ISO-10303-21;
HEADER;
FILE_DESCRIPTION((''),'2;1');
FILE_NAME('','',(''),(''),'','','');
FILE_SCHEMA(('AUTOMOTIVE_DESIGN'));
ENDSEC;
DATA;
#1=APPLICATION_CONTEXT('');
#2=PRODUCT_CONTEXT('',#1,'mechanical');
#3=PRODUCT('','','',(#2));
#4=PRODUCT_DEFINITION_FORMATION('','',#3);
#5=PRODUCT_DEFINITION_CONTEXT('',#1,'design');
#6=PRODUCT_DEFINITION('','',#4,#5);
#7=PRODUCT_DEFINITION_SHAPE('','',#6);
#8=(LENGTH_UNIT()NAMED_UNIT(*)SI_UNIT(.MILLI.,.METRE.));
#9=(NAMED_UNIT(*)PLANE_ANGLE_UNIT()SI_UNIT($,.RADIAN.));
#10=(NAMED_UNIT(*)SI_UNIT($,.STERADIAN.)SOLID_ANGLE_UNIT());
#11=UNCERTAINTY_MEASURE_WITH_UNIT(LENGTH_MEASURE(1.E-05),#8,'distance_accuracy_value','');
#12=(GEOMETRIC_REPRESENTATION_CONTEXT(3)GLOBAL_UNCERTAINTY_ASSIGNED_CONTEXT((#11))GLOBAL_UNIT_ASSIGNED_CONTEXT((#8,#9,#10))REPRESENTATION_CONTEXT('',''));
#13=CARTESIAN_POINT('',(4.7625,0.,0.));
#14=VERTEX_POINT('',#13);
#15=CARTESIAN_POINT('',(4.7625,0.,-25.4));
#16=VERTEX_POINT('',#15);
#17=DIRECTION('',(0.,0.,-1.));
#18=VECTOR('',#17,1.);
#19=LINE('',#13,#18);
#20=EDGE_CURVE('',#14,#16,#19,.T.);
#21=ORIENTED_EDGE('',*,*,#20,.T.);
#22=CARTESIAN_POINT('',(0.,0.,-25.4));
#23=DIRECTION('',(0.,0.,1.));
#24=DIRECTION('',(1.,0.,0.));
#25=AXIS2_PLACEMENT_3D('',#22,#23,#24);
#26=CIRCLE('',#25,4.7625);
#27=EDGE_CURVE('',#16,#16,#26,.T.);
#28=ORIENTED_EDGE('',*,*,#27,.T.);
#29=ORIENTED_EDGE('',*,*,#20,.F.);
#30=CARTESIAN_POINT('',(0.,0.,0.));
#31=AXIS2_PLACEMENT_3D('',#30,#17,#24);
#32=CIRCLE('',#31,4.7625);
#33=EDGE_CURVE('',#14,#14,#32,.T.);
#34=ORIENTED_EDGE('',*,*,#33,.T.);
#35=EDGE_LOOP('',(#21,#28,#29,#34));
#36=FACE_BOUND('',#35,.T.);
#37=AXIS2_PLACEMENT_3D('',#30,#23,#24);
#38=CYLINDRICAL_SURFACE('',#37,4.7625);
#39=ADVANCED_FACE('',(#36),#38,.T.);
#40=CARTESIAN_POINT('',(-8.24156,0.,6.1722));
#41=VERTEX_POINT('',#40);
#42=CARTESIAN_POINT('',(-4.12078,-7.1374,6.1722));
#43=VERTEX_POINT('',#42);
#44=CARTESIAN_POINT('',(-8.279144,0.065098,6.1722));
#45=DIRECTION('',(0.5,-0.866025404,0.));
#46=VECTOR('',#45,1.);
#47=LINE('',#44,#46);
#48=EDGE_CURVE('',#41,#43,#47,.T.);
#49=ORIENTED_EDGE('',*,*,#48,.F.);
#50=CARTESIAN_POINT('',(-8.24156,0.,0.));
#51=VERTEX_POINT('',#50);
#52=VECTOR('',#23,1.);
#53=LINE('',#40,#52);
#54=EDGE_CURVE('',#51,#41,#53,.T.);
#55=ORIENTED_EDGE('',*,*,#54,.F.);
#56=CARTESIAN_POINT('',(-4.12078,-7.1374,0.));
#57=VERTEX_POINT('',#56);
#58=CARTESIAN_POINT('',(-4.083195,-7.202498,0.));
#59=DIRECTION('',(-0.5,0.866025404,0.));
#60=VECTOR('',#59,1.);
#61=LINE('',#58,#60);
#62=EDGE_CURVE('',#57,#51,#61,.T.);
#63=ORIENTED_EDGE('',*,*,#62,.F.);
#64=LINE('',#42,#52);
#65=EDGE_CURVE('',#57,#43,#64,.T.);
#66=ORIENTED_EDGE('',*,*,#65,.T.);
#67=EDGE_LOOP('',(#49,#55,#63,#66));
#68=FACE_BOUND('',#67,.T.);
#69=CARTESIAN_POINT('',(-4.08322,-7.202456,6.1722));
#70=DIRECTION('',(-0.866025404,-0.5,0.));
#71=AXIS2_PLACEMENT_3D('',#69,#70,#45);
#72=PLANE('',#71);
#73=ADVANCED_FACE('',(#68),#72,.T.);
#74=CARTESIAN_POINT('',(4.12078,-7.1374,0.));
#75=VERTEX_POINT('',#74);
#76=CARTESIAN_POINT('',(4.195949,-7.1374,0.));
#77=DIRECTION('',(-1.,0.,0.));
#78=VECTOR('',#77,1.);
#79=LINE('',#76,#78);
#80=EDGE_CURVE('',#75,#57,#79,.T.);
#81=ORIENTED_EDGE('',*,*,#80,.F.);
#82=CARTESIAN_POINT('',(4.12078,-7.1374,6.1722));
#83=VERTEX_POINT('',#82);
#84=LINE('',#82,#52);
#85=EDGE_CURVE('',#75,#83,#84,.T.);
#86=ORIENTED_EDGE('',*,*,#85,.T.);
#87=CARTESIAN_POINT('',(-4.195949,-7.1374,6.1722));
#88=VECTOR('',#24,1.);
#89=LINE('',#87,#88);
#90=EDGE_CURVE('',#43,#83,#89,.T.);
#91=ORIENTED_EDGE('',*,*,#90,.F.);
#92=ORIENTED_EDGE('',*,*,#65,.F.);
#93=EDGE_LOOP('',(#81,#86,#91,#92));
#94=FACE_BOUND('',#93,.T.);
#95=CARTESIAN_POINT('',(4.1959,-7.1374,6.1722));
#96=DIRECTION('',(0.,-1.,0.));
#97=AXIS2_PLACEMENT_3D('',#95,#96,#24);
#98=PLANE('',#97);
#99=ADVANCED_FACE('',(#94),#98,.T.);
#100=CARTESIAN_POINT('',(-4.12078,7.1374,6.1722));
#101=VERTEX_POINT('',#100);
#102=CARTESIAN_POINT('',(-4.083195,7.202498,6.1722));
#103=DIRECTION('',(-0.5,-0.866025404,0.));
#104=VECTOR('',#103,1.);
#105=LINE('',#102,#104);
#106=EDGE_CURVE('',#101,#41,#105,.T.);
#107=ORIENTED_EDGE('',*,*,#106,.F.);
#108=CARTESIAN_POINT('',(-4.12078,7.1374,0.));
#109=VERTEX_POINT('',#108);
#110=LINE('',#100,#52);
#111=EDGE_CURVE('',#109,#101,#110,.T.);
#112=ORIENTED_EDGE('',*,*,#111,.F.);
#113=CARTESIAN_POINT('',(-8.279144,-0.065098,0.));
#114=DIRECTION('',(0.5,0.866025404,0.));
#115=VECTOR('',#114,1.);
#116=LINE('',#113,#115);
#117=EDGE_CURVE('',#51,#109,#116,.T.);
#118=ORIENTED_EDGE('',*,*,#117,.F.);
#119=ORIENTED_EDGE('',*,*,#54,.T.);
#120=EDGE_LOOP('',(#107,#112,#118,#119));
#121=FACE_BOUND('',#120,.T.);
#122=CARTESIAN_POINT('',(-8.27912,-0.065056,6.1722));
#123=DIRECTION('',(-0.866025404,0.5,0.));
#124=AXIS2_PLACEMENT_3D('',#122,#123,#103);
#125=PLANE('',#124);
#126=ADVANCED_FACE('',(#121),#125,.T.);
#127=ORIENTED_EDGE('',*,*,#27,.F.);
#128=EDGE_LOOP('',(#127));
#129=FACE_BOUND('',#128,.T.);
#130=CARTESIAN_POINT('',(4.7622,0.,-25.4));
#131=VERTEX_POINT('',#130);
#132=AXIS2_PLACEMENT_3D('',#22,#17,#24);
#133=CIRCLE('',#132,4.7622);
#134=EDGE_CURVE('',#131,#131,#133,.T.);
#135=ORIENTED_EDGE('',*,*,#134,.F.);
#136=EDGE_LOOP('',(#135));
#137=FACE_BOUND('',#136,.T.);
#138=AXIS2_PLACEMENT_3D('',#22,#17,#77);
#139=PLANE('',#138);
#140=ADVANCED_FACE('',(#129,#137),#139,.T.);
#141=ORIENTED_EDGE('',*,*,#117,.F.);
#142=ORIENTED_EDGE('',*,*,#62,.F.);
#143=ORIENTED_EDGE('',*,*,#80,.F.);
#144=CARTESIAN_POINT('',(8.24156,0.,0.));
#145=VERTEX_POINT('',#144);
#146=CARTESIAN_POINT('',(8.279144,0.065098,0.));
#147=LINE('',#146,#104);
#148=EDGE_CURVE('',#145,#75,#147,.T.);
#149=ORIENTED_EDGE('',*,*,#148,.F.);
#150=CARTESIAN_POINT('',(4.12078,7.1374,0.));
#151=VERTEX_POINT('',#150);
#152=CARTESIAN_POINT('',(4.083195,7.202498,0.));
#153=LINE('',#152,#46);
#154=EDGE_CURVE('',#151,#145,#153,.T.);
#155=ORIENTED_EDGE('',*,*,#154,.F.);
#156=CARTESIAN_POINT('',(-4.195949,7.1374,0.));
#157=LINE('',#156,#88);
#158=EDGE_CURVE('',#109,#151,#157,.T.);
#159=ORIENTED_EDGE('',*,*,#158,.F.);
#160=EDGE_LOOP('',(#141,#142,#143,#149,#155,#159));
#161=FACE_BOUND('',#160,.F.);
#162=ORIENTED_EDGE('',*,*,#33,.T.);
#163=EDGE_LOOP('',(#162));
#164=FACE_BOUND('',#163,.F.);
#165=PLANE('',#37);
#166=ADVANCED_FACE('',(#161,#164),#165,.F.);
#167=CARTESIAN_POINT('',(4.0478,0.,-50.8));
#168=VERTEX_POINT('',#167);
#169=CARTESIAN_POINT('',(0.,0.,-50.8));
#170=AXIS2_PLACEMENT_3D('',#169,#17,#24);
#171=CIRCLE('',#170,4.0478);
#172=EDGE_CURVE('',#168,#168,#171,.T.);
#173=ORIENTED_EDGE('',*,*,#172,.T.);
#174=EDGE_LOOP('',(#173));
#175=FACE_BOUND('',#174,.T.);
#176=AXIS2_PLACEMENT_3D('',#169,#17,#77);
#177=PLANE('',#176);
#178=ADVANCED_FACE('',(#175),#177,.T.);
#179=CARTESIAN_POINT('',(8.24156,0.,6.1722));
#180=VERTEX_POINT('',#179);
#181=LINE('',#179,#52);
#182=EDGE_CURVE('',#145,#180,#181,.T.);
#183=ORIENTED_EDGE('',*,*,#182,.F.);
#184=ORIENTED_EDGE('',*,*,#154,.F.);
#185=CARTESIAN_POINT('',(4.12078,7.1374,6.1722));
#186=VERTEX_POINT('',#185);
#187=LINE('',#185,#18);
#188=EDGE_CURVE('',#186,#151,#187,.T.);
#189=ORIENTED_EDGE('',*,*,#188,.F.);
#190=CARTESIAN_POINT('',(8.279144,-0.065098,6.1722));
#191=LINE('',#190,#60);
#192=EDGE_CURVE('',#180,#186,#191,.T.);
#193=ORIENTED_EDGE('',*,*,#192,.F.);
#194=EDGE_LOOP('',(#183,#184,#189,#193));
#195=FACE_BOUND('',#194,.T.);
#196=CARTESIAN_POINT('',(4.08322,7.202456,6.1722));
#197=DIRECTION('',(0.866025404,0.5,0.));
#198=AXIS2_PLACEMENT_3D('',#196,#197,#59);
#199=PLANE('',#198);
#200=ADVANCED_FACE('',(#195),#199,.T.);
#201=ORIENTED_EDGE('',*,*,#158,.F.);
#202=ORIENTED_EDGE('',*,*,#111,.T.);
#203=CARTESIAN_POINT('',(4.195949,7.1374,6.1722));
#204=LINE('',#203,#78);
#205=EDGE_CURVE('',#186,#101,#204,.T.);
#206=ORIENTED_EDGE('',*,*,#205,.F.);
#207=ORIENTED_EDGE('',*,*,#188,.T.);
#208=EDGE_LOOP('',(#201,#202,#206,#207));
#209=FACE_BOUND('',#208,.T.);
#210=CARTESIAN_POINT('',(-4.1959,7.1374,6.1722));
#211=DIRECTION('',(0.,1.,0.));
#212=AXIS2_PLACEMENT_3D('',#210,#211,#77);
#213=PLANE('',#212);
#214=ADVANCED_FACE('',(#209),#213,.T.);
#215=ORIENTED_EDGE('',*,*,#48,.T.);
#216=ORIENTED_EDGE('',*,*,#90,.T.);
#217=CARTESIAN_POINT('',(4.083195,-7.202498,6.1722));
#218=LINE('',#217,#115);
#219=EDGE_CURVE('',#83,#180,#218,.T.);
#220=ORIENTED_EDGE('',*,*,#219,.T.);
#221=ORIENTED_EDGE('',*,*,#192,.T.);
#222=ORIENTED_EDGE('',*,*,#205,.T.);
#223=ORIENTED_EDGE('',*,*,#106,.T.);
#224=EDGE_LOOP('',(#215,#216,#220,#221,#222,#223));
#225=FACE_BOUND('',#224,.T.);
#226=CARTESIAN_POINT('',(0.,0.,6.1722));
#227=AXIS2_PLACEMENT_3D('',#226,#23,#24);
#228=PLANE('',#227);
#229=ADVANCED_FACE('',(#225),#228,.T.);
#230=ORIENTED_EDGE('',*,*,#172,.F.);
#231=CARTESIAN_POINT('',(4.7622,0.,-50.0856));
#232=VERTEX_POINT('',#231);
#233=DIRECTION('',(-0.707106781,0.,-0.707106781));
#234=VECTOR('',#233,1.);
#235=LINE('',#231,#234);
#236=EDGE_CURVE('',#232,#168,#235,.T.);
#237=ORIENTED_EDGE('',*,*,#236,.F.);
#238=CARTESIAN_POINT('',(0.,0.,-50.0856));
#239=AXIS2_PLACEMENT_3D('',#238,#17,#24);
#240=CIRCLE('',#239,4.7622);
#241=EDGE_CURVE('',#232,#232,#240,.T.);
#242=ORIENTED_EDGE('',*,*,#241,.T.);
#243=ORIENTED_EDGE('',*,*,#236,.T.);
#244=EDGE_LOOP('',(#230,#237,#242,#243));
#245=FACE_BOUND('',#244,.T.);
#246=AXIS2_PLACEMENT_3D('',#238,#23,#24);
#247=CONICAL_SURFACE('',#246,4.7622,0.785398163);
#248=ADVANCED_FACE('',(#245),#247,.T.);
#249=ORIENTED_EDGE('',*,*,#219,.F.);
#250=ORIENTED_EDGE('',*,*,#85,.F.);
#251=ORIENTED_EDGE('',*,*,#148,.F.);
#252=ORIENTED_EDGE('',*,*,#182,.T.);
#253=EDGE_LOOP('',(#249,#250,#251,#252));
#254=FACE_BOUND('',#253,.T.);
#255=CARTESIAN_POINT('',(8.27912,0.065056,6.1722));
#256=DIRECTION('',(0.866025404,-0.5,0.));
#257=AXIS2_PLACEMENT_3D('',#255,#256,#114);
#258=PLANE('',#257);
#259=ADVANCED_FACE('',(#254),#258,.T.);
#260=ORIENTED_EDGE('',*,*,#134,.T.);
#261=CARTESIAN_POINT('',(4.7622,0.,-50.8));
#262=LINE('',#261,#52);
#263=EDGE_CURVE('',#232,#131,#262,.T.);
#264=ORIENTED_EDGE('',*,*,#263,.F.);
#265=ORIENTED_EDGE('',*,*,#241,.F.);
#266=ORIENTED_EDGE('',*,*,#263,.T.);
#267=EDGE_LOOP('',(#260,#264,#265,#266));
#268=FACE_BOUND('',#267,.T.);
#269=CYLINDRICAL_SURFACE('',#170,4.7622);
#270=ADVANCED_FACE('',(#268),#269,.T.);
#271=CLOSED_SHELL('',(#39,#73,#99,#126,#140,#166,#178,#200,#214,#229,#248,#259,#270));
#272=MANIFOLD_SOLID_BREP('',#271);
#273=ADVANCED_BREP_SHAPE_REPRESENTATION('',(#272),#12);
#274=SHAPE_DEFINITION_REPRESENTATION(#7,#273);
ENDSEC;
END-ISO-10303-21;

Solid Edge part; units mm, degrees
sketch "Sketch1" plane through (0, 0, 0) normal (0, 0, 1) x (1, 0, 0)
  circle A0 centre (0, 0) radius 8.2794
  dimension "D1" = 16.5588
extrude "Protrusion1" add sketch "Sketch1" along normal blind 6.1722
sketch "Sketch2" plane through (0, 0, 0) normal (0, 0, -1) x (1, 0, 0)
  circle A0 centre (0, 0) radius 4.7625
extrude "Protrusion2" add sketch "Sketch2" along normal blind 50.8
sketch "Sketch3" plane through (0, 0, -50.8) normal (0, 0, -1) x (1, 0, 0)
  circle A0 centre (0, 0) radius 4.7622
extrude "Cutout1" cut sketch "Sketch3" against normal blind 25.4 flip side to cut
chamfer "Chamfer_1" distance 0.7144 angle 45 1 edges at (-4.7622, 0, -50.8)
sketch "Sketch4" plane through (0, 0, 6.1722) normal (0, 0, 1) x (1, 0, 0)
  line L0 (-4.1959, 7.1374) -> (4.1959, 7.1374)
  dimension "D1" = 14.2748
extrude "Cutout2" cut sketch "Sketch4" against normal up to next material side at (0, 7.1874, 6.1722)
pattern_circular "Pattern1" count 6 over 360 about axis through (0, 0, 6.1722) along (0, 0, 1) of "Cutout2"
properties part number "24100497"
